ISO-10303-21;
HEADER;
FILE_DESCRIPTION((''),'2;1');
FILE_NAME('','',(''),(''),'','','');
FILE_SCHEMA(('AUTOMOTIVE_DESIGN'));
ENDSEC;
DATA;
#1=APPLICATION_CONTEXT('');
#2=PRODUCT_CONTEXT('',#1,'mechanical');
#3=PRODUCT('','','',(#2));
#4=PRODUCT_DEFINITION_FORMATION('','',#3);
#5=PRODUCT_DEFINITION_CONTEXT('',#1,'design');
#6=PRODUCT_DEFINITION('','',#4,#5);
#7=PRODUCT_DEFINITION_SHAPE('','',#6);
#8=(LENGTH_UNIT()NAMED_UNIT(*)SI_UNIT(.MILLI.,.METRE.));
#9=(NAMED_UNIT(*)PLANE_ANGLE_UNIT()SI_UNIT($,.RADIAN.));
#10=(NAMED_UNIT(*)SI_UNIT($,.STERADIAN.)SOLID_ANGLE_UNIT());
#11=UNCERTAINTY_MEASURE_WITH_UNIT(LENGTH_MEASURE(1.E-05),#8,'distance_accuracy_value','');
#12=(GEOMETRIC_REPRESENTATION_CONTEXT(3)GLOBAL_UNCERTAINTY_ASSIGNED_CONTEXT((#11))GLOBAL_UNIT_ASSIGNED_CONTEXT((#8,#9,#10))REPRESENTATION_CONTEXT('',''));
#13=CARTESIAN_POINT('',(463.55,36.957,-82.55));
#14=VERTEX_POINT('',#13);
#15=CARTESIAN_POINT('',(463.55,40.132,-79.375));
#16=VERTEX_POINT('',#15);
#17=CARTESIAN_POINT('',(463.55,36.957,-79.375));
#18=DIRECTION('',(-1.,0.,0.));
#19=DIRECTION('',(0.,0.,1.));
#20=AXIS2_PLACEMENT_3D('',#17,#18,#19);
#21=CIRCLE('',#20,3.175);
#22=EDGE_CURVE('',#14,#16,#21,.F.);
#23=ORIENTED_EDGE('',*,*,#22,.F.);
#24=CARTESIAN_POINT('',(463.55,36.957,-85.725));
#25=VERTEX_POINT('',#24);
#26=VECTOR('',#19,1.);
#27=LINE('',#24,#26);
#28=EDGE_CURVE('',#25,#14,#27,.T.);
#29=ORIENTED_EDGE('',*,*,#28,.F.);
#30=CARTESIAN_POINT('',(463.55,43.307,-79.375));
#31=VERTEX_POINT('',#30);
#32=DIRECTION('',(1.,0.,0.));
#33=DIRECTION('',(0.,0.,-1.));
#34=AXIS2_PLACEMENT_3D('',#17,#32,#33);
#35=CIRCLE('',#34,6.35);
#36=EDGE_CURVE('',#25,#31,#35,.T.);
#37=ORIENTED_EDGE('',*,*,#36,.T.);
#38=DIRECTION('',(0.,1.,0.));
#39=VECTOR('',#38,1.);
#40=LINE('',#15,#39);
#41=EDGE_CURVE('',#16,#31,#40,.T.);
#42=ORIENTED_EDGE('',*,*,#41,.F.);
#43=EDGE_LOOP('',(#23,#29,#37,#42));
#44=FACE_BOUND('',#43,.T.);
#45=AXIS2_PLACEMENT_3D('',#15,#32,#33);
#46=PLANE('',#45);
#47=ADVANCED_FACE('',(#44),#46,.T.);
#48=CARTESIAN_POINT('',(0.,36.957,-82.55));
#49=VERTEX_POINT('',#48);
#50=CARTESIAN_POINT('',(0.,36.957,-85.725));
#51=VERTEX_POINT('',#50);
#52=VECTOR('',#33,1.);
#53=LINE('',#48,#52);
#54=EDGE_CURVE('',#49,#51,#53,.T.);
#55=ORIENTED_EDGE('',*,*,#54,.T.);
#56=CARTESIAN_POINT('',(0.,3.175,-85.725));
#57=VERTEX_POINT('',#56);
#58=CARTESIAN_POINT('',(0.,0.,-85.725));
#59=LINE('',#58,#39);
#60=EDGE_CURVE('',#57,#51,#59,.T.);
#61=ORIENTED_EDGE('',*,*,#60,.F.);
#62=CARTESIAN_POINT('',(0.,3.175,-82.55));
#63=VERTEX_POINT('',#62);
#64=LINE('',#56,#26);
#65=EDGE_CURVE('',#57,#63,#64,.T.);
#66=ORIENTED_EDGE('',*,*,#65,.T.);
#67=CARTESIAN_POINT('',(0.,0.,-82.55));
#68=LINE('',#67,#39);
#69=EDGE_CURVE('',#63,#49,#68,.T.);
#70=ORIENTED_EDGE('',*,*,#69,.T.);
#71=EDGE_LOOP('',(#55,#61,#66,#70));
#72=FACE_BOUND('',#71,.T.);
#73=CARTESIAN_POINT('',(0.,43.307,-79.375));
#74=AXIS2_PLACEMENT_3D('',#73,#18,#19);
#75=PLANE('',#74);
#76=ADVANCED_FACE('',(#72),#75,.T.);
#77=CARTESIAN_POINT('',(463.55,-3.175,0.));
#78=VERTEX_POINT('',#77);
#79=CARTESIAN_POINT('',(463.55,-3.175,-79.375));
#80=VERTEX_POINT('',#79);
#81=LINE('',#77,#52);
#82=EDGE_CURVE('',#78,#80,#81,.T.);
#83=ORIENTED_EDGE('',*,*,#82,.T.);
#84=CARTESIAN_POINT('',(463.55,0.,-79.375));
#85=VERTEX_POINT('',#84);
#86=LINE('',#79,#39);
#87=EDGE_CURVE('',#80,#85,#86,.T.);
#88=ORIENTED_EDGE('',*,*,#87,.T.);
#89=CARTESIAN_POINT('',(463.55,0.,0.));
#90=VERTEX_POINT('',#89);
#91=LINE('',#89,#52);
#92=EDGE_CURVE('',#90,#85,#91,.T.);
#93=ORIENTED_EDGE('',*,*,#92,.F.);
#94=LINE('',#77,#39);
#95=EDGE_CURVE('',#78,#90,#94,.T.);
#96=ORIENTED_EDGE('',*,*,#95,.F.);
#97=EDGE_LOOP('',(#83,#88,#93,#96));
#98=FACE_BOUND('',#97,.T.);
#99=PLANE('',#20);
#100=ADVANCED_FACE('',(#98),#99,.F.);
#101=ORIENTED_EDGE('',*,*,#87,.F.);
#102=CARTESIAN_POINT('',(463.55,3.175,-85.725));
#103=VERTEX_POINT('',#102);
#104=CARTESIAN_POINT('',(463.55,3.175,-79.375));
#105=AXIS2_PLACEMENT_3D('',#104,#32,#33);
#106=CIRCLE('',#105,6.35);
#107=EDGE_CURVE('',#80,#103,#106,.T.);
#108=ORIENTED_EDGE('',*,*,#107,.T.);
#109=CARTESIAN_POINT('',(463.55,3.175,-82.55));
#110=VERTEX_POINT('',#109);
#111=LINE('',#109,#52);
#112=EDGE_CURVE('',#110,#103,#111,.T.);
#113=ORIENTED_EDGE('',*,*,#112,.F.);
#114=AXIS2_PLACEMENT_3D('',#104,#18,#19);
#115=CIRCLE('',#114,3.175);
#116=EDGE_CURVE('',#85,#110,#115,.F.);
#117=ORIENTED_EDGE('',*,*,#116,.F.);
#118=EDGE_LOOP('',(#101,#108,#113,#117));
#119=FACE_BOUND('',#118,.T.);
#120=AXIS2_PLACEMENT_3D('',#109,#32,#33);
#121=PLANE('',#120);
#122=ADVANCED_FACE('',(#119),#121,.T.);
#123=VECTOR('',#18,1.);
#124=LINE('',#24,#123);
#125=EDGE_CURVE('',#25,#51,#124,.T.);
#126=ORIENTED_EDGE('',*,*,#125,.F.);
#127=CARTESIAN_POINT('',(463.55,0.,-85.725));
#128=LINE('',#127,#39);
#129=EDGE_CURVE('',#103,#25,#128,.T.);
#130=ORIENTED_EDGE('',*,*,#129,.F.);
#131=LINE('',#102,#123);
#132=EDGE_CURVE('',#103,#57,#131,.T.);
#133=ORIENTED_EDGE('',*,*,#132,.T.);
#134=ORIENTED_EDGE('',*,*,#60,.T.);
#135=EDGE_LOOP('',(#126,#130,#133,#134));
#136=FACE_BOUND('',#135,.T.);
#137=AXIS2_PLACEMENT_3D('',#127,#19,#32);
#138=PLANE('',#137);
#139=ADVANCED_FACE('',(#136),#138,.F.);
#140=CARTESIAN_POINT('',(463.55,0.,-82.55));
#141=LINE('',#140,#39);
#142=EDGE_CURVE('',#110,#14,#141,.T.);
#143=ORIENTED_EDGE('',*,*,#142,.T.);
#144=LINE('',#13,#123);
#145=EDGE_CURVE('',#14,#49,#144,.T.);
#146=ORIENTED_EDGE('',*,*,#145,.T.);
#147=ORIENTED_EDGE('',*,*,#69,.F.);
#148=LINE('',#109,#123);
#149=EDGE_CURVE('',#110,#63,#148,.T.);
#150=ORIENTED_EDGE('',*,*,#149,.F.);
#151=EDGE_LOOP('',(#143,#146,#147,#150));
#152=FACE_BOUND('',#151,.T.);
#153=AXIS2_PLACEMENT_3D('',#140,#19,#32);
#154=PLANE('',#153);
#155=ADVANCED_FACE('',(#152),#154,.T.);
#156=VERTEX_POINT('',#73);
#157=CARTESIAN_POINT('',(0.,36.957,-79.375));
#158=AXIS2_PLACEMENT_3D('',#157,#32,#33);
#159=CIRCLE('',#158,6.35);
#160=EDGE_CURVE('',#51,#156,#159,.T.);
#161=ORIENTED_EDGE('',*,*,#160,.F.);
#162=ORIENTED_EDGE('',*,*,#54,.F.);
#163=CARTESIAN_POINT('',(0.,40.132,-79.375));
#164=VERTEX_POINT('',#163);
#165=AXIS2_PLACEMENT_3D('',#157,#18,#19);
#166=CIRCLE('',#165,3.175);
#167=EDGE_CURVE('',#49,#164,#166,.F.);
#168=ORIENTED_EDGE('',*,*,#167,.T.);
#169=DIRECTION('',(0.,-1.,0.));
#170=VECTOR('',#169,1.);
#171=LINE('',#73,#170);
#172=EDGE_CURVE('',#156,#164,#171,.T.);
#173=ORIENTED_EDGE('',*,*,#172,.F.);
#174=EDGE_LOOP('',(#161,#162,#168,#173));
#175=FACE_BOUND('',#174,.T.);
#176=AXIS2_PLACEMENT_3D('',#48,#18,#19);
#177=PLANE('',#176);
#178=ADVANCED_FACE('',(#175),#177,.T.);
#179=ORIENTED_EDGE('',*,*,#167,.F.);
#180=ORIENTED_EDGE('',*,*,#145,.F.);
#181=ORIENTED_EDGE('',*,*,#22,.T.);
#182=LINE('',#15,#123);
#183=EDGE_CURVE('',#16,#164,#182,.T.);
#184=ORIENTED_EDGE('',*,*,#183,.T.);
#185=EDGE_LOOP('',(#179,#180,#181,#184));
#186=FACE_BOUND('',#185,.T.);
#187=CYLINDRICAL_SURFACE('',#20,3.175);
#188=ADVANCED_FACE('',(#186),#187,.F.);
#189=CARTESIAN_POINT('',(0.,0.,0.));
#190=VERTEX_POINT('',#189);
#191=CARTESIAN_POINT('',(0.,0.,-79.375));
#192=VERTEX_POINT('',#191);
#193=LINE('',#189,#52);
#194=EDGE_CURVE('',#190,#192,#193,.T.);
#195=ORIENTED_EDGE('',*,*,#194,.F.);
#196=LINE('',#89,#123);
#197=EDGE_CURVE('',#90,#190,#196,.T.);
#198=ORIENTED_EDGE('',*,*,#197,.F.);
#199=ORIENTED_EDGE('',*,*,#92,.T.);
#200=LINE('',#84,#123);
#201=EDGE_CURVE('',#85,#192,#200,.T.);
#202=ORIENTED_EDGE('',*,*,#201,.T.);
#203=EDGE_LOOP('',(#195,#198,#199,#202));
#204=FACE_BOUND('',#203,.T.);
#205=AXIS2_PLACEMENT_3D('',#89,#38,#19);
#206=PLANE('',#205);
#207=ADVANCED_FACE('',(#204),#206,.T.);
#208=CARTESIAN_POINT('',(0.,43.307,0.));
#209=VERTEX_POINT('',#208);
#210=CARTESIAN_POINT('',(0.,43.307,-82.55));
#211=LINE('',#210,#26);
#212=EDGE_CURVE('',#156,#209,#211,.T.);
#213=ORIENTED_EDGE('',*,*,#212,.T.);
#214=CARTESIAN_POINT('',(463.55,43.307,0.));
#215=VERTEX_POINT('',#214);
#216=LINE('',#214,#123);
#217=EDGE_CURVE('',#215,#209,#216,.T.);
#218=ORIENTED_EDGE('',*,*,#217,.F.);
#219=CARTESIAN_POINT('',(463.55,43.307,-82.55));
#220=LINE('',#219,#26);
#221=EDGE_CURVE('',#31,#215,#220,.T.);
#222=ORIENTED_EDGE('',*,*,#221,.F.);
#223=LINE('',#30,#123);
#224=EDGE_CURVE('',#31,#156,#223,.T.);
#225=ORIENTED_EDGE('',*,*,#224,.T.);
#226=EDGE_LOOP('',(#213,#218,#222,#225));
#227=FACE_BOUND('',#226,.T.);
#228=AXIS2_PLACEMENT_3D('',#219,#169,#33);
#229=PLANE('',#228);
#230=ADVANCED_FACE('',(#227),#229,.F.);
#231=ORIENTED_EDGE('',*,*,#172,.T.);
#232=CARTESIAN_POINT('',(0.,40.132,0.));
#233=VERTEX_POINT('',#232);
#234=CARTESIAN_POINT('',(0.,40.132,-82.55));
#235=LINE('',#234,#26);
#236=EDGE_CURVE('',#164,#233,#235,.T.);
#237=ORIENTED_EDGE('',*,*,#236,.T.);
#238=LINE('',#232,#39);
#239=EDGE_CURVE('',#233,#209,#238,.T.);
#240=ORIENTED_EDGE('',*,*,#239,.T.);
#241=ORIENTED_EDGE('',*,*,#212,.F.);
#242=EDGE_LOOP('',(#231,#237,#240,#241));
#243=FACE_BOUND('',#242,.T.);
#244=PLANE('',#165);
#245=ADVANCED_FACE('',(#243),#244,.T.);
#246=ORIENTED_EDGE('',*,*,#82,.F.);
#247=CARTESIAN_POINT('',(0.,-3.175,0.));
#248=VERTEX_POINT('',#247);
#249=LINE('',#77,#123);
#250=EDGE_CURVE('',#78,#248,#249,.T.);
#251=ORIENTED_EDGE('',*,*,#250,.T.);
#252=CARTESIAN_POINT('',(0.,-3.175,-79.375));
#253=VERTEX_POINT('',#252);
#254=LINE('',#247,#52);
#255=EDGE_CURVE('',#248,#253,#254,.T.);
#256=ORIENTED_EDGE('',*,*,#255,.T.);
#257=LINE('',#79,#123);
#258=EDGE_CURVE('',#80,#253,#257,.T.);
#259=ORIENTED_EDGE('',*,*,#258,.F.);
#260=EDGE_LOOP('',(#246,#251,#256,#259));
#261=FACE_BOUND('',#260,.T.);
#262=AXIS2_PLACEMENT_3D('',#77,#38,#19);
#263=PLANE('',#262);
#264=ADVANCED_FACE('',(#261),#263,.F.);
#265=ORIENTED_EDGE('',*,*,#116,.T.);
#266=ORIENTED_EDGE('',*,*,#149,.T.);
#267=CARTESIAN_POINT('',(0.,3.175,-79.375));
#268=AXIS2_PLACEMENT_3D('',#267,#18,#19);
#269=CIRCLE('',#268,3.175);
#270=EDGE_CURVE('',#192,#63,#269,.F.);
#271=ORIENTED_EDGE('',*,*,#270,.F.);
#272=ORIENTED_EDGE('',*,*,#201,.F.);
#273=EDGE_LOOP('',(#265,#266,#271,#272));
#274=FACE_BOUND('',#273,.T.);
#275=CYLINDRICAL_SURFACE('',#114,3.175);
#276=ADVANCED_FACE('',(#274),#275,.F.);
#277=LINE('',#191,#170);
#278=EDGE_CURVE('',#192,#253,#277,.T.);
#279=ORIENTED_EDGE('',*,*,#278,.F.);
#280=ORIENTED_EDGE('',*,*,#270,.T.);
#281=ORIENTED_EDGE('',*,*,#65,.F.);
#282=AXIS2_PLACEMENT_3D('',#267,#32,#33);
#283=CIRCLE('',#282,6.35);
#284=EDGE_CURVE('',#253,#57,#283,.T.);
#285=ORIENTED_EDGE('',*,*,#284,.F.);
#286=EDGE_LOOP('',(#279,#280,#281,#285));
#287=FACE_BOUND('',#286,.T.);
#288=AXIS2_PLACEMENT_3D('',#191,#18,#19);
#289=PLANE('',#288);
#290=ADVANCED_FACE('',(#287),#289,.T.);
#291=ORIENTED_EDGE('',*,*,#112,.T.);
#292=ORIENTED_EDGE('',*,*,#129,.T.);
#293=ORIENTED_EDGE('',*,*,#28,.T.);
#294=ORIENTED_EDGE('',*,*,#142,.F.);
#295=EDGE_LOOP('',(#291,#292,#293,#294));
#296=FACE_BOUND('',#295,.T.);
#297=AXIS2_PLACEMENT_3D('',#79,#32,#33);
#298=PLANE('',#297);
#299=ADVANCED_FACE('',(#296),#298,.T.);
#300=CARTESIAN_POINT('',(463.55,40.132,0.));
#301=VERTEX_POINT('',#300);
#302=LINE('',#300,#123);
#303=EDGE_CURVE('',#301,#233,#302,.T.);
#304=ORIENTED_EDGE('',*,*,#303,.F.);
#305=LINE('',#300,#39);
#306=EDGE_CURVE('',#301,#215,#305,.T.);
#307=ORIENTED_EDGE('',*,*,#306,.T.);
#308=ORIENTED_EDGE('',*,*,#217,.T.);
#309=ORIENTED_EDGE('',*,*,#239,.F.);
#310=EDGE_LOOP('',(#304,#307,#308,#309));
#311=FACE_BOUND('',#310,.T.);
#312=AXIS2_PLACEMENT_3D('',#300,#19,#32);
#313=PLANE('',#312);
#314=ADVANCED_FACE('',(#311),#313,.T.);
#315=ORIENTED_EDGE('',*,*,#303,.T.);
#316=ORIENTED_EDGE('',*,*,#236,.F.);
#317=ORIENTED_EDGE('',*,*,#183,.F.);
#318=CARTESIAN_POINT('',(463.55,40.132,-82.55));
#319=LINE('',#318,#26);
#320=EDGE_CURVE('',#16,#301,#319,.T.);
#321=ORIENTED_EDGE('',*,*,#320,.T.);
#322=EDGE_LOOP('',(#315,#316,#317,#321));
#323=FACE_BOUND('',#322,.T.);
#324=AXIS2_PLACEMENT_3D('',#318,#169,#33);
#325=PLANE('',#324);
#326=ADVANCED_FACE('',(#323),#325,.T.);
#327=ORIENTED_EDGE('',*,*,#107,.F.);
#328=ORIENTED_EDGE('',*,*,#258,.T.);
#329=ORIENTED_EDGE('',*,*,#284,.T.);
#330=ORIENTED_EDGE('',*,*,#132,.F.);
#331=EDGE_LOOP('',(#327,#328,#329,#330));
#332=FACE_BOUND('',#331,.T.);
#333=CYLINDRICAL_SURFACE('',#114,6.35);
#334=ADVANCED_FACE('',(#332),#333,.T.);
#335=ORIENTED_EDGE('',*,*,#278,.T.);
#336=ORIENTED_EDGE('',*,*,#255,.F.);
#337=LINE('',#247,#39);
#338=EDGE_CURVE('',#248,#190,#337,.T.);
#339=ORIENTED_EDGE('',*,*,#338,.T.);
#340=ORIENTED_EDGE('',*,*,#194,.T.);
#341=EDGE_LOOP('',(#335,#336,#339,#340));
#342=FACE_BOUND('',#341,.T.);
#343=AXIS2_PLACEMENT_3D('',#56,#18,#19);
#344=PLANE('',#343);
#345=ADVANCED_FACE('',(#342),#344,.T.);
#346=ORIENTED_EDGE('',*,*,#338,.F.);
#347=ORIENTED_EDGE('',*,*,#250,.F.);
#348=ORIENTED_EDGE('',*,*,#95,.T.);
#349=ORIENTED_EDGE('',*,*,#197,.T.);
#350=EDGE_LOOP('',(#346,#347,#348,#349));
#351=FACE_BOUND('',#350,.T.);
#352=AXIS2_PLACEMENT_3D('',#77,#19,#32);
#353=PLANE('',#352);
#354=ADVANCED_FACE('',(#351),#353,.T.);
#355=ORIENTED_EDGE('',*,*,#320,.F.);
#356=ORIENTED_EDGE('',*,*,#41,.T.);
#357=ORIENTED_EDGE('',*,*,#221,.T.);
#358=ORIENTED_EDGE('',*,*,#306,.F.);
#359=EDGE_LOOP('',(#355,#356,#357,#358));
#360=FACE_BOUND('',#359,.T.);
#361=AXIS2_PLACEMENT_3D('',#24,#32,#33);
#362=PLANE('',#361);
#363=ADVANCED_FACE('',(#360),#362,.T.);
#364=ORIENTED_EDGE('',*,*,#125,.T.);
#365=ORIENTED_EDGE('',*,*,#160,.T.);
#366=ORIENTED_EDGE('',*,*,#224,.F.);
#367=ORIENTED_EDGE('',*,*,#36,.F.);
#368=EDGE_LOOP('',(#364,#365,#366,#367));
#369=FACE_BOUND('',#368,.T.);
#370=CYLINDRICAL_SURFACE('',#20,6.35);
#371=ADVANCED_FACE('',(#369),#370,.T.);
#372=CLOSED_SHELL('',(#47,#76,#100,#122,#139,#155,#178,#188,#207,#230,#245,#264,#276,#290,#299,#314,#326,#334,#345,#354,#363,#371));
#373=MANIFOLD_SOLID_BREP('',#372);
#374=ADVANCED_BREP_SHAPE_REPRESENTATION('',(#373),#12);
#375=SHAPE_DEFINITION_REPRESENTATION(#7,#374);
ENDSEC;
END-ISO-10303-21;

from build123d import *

# Parameters (mm, degrees)
BASE_FLANGE1_DEPTH = 463.55


# Sheet-metal steps are written as plain solids
with BuildPart() as part:
    # Sketch1 → Base-Flange1 (new body)
    with BuildSketch(Plane(origin=(0, 0, 0), x_dir=(0, 0, -1), z_dir=(1, 0, 0))):
        with BuildLine():
            Line((0, 0), (79.375, 0))
            ThreePointArc((79.375, 0), (81.62006403, 0.92993597), (82.55, 3.175))
            Line((82.55, 3.175), (82.55, 36.957))
            ThreePointArc((82.55, 36.957), (81.62006403, 39.20206403), (79.375, 40.132))
            Line((79.375, 40.132), (0, 40.132))
            Line((0, 40.132), (0, 43.307))
            Line((0, 43.307), (79.375, 43.307))
            ThreePointArc((79.375, 43.307), (83.865128061, 41.447128061), (85.725, 36.957))
            Line((85.725, 36.957), (85.725, 3.175))
            ThreePointArc((85.725, 3.175), (83.865128061, -1.315128061), (79.375, -3.175))
            Line((79.375, -3.175), (0, -3.175))
            Line((0, -3.175), (0, 0))
        make_face()
    extrude(amount=BASE_FLANGE1_DEPTH)


solid = part.part
